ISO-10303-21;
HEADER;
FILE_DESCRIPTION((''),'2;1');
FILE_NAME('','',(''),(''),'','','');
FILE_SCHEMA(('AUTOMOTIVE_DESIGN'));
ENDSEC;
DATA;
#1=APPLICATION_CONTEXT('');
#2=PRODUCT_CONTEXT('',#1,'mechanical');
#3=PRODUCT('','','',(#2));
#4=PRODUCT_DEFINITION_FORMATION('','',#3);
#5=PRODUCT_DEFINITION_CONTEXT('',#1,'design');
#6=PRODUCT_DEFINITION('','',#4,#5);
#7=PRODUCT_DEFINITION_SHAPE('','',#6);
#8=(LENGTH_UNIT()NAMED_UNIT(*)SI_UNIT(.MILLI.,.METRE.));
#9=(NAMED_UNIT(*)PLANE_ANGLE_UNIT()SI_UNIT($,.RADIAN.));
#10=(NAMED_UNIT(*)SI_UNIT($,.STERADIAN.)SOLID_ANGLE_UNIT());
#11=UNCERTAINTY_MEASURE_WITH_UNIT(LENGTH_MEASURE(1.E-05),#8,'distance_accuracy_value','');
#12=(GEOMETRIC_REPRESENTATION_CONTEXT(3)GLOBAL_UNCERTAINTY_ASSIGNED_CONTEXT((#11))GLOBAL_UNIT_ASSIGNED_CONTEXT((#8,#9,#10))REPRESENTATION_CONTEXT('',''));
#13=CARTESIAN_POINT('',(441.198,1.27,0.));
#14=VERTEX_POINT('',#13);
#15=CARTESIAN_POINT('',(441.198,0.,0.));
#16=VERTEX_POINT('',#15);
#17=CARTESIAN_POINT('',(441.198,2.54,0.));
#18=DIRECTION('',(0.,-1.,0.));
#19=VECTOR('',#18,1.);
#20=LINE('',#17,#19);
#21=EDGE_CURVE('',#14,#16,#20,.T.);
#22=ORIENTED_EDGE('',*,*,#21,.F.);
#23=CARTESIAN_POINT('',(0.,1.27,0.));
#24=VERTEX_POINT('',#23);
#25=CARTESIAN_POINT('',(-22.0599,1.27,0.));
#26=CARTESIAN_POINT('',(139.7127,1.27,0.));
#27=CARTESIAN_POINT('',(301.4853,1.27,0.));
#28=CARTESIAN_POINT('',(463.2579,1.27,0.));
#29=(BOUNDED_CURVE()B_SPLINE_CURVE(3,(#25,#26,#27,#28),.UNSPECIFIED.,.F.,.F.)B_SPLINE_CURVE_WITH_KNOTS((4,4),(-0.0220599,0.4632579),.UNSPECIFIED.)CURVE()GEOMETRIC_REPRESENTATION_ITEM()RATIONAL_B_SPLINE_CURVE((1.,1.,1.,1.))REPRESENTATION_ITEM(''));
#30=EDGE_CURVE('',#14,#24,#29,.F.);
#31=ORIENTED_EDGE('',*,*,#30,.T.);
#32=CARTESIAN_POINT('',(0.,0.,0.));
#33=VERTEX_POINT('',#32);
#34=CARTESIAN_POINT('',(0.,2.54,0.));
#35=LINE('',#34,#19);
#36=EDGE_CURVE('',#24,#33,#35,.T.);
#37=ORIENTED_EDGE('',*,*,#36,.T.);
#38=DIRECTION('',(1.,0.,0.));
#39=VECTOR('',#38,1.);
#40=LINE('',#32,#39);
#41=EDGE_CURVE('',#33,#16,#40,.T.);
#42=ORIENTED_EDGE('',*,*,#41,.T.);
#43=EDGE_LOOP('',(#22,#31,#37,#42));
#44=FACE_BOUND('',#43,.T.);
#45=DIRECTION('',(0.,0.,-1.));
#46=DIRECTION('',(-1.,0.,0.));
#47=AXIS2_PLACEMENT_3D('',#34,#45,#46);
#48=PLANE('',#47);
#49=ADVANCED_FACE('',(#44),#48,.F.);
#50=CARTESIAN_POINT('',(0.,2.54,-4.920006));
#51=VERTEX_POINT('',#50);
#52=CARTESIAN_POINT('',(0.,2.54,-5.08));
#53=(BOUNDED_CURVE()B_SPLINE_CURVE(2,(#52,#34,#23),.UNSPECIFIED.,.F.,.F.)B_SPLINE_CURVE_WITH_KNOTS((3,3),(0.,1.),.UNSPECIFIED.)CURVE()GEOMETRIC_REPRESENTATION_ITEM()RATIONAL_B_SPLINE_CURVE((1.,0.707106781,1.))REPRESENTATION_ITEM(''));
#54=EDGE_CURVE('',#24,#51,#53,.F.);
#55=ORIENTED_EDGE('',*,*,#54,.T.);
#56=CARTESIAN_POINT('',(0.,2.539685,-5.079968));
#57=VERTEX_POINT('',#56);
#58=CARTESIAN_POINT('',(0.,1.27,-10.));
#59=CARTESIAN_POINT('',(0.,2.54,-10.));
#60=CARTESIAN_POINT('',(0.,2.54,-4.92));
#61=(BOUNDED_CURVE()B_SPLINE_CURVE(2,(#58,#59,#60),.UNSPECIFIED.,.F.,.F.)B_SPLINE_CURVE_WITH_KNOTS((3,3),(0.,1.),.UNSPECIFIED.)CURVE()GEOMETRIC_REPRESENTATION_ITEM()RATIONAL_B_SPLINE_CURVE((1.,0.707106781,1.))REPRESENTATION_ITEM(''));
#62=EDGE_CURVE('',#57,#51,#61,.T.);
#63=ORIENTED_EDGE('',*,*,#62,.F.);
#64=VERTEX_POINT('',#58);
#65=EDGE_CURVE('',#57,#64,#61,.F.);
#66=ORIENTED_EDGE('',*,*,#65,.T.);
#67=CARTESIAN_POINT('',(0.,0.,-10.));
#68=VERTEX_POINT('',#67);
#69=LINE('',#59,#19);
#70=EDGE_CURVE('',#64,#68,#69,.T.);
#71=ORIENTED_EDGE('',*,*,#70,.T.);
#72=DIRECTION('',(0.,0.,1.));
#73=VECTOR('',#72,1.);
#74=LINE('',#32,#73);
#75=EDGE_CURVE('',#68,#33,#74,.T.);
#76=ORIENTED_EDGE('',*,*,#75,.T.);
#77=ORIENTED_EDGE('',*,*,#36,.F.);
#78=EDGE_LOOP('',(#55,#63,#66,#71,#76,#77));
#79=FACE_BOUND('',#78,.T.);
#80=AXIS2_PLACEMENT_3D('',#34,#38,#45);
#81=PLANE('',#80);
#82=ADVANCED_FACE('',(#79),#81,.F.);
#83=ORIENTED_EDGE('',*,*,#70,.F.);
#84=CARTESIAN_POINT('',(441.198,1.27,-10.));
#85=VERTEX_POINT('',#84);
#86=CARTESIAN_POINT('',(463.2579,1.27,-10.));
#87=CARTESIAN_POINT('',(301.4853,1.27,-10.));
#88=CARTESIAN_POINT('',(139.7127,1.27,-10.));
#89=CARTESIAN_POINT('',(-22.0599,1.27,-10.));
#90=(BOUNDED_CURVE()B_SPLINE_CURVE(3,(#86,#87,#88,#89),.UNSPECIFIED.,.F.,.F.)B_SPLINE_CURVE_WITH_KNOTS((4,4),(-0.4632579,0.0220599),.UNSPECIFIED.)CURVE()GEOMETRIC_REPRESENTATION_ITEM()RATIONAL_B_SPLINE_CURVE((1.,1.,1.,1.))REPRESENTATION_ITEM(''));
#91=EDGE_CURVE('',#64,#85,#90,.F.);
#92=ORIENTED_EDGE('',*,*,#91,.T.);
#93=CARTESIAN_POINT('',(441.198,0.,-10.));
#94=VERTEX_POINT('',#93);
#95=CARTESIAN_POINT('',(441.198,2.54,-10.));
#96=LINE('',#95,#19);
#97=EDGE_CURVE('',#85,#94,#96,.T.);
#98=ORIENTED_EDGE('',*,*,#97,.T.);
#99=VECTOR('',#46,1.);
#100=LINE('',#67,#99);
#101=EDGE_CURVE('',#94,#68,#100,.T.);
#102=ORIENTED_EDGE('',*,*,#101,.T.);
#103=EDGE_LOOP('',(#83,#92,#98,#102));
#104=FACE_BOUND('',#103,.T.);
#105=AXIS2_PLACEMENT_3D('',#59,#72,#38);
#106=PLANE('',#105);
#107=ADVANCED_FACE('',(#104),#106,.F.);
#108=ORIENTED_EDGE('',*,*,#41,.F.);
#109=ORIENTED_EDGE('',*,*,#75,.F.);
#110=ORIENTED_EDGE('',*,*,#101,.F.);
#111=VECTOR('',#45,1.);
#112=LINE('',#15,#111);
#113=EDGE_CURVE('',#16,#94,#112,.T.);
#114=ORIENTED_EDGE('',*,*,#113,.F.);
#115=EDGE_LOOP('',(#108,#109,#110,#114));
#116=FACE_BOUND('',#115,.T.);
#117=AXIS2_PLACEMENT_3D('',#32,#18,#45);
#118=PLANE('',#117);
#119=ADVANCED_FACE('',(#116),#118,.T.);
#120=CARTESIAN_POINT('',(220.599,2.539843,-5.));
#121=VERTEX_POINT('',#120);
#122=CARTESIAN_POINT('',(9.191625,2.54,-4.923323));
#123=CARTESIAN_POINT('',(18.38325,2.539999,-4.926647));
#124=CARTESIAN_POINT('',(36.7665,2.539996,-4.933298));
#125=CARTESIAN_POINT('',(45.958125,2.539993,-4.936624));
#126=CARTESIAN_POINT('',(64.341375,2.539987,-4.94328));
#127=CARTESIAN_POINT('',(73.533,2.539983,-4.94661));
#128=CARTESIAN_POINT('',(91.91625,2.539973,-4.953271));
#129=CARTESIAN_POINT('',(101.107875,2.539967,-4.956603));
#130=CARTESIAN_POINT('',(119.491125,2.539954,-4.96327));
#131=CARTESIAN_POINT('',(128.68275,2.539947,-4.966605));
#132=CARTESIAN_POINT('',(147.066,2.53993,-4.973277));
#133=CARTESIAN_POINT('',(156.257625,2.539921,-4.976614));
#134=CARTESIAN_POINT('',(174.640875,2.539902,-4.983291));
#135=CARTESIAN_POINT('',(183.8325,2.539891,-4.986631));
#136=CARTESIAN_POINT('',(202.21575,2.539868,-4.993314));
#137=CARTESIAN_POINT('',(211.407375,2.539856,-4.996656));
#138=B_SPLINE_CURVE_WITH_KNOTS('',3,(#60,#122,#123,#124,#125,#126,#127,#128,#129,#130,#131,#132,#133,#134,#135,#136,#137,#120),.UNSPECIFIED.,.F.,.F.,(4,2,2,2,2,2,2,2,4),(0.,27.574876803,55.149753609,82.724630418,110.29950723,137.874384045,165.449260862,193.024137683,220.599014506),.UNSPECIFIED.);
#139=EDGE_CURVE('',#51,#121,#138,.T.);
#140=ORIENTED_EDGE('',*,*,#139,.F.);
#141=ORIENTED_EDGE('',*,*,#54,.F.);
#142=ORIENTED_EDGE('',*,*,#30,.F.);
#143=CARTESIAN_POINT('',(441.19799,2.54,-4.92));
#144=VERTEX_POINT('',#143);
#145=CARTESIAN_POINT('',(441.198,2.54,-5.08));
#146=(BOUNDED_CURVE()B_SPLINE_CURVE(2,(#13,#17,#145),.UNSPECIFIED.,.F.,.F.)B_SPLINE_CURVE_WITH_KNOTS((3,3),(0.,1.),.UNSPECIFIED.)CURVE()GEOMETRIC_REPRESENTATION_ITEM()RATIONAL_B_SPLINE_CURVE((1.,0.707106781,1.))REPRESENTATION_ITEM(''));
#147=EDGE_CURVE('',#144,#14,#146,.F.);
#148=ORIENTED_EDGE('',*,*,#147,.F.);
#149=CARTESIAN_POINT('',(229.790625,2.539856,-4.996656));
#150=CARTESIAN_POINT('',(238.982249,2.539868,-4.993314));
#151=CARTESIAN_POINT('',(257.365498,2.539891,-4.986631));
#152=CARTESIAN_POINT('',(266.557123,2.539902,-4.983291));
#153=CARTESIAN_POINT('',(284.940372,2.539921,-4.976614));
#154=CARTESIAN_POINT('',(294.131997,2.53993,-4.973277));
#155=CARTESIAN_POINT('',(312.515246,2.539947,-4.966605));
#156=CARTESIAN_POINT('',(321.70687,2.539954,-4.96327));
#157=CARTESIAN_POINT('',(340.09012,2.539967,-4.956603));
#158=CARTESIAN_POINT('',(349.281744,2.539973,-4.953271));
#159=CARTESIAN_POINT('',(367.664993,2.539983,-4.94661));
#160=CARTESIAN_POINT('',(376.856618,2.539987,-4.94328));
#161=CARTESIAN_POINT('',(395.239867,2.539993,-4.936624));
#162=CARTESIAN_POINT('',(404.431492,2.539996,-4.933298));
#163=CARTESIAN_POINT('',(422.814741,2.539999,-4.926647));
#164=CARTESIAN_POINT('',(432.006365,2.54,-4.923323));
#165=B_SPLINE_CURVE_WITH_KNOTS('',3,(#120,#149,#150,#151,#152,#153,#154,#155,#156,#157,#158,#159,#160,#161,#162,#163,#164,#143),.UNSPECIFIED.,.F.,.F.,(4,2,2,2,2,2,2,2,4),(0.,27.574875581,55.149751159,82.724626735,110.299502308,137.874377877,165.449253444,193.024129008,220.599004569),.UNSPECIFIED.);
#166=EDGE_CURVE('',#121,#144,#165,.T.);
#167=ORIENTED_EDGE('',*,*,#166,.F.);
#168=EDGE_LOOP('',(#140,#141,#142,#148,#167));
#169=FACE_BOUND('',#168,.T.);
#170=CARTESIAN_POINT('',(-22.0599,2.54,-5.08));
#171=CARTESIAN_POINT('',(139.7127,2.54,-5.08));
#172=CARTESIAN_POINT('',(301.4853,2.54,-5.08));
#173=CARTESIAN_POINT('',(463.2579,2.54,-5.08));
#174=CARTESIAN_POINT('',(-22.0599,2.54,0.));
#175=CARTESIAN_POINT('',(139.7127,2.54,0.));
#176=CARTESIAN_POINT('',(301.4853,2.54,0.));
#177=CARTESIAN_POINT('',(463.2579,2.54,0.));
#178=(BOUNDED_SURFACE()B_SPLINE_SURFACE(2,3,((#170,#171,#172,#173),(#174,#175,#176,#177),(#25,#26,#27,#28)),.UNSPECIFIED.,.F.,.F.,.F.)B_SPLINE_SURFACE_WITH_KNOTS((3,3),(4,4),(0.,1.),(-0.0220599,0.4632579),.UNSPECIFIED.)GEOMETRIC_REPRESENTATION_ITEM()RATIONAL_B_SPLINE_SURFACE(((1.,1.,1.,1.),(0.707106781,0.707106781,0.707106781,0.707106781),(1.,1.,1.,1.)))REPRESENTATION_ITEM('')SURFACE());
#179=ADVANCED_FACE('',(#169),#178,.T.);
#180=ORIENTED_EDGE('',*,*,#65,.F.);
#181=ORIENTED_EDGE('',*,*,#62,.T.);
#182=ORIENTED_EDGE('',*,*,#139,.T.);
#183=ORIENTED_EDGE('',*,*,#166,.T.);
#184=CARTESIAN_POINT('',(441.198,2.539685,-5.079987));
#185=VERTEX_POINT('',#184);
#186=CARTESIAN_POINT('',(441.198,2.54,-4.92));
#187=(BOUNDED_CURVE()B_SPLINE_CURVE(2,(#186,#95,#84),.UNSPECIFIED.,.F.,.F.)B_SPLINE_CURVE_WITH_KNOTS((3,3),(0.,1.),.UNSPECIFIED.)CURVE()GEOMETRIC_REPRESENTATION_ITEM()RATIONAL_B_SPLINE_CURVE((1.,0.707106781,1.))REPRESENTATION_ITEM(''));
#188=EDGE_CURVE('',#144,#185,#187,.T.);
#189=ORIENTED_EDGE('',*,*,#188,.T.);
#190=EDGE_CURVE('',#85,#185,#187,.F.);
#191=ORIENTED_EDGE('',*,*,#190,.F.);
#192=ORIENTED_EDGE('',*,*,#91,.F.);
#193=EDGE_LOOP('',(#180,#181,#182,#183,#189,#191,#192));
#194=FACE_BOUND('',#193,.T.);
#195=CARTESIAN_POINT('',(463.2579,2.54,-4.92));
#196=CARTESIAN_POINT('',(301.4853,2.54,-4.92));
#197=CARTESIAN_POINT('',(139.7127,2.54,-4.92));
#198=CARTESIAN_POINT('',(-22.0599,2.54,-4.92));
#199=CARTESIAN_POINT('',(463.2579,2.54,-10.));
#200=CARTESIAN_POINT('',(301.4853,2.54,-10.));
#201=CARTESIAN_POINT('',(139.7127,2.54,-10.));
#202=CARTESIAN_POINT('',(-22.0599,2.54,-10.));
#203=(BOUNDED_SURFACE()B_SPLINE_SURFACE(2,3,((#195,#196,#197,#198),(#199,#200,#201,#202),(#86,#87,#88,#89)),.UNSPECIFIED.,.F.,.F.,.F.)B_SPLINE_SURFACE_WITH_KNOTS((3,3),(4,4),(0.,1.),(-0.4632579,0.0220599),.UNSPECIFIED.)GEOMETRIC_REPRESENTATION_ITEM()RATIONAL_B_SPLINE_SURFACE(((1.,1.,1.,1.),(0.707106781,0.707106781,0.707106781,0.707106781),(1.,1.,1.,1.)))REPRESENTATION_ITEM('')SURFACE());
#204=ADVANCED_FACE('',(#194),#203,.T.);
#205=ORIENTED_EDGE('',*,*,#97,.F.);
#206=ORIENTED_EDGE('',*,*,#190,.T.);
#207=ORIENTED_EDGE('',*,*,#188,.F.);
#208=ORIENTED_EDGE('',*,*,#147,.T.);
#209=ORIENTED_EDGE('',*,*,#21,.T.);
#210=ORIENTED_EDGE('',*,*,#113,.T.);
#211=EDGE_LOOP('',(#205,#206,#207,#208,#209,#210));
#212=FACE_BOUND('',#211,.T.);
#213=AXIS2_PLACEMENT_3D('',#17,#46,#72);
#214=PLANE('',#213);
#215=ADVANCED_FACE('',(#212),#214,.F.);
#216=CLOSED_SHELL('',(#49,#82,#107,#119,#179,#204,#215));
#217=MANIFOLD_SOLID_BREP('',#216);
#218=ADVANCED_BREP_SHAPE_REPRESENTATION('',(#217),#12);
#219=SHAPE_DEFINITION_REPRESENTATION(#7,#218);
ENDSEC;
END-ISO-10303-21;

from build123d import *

# Parameters (mm, degrees)
SKETCH1_W           = 441.198
SKETCH1_H           = 10
BOSS_EXTRUDE1_DEPTH = 2.54
FILLET5_SIZE        = 1.27
FILLET5_SIZE_2      = 5.08


with BuildPart() as part:
    # Sketch1 → Boss-Extrude1 (new body)
    with BuildSketch(Plane(origin=(0, 0, 0), x_dir=(1, 0, 0), z_dir=(0, 1, 0))):
        with Locations((220.599, 5)):
            Rectangle(SKETCH1_W, SKETCH1_H)
    extrude(amount=BOSS_EXTRUDE1_DEPTH)

    # Fillet5
    # an asymmetric fillet: 5.08, 1.27 mm, written as the material it takes off along each edge
    with BuildSketch(Plane(origin=(453.898, 2.54, -10), x_dir=(0, -1, 0), z_dir=(-1, 0, 0)), Plane(origin=(-12.7, 2.54, 0), x_dir=(0, -1, 0), z_dir=(1, 0, 0))) as fillet5_piece_1:
        with BuildLine():
            Bezier((FILLET5_SIZE, 0), (0, 0), (0, FILLET5_SIZE_2), weights=[1, 0.707106781, 1])
            Line((0, FILLET5_SIZE_2), (0, 0))
            Line((0, 0), (FILLET5_SIZE, 0))
        make_face()
    extrude(amount=466.598, mode=Mode.SUBTRACT)


solid = part.part
